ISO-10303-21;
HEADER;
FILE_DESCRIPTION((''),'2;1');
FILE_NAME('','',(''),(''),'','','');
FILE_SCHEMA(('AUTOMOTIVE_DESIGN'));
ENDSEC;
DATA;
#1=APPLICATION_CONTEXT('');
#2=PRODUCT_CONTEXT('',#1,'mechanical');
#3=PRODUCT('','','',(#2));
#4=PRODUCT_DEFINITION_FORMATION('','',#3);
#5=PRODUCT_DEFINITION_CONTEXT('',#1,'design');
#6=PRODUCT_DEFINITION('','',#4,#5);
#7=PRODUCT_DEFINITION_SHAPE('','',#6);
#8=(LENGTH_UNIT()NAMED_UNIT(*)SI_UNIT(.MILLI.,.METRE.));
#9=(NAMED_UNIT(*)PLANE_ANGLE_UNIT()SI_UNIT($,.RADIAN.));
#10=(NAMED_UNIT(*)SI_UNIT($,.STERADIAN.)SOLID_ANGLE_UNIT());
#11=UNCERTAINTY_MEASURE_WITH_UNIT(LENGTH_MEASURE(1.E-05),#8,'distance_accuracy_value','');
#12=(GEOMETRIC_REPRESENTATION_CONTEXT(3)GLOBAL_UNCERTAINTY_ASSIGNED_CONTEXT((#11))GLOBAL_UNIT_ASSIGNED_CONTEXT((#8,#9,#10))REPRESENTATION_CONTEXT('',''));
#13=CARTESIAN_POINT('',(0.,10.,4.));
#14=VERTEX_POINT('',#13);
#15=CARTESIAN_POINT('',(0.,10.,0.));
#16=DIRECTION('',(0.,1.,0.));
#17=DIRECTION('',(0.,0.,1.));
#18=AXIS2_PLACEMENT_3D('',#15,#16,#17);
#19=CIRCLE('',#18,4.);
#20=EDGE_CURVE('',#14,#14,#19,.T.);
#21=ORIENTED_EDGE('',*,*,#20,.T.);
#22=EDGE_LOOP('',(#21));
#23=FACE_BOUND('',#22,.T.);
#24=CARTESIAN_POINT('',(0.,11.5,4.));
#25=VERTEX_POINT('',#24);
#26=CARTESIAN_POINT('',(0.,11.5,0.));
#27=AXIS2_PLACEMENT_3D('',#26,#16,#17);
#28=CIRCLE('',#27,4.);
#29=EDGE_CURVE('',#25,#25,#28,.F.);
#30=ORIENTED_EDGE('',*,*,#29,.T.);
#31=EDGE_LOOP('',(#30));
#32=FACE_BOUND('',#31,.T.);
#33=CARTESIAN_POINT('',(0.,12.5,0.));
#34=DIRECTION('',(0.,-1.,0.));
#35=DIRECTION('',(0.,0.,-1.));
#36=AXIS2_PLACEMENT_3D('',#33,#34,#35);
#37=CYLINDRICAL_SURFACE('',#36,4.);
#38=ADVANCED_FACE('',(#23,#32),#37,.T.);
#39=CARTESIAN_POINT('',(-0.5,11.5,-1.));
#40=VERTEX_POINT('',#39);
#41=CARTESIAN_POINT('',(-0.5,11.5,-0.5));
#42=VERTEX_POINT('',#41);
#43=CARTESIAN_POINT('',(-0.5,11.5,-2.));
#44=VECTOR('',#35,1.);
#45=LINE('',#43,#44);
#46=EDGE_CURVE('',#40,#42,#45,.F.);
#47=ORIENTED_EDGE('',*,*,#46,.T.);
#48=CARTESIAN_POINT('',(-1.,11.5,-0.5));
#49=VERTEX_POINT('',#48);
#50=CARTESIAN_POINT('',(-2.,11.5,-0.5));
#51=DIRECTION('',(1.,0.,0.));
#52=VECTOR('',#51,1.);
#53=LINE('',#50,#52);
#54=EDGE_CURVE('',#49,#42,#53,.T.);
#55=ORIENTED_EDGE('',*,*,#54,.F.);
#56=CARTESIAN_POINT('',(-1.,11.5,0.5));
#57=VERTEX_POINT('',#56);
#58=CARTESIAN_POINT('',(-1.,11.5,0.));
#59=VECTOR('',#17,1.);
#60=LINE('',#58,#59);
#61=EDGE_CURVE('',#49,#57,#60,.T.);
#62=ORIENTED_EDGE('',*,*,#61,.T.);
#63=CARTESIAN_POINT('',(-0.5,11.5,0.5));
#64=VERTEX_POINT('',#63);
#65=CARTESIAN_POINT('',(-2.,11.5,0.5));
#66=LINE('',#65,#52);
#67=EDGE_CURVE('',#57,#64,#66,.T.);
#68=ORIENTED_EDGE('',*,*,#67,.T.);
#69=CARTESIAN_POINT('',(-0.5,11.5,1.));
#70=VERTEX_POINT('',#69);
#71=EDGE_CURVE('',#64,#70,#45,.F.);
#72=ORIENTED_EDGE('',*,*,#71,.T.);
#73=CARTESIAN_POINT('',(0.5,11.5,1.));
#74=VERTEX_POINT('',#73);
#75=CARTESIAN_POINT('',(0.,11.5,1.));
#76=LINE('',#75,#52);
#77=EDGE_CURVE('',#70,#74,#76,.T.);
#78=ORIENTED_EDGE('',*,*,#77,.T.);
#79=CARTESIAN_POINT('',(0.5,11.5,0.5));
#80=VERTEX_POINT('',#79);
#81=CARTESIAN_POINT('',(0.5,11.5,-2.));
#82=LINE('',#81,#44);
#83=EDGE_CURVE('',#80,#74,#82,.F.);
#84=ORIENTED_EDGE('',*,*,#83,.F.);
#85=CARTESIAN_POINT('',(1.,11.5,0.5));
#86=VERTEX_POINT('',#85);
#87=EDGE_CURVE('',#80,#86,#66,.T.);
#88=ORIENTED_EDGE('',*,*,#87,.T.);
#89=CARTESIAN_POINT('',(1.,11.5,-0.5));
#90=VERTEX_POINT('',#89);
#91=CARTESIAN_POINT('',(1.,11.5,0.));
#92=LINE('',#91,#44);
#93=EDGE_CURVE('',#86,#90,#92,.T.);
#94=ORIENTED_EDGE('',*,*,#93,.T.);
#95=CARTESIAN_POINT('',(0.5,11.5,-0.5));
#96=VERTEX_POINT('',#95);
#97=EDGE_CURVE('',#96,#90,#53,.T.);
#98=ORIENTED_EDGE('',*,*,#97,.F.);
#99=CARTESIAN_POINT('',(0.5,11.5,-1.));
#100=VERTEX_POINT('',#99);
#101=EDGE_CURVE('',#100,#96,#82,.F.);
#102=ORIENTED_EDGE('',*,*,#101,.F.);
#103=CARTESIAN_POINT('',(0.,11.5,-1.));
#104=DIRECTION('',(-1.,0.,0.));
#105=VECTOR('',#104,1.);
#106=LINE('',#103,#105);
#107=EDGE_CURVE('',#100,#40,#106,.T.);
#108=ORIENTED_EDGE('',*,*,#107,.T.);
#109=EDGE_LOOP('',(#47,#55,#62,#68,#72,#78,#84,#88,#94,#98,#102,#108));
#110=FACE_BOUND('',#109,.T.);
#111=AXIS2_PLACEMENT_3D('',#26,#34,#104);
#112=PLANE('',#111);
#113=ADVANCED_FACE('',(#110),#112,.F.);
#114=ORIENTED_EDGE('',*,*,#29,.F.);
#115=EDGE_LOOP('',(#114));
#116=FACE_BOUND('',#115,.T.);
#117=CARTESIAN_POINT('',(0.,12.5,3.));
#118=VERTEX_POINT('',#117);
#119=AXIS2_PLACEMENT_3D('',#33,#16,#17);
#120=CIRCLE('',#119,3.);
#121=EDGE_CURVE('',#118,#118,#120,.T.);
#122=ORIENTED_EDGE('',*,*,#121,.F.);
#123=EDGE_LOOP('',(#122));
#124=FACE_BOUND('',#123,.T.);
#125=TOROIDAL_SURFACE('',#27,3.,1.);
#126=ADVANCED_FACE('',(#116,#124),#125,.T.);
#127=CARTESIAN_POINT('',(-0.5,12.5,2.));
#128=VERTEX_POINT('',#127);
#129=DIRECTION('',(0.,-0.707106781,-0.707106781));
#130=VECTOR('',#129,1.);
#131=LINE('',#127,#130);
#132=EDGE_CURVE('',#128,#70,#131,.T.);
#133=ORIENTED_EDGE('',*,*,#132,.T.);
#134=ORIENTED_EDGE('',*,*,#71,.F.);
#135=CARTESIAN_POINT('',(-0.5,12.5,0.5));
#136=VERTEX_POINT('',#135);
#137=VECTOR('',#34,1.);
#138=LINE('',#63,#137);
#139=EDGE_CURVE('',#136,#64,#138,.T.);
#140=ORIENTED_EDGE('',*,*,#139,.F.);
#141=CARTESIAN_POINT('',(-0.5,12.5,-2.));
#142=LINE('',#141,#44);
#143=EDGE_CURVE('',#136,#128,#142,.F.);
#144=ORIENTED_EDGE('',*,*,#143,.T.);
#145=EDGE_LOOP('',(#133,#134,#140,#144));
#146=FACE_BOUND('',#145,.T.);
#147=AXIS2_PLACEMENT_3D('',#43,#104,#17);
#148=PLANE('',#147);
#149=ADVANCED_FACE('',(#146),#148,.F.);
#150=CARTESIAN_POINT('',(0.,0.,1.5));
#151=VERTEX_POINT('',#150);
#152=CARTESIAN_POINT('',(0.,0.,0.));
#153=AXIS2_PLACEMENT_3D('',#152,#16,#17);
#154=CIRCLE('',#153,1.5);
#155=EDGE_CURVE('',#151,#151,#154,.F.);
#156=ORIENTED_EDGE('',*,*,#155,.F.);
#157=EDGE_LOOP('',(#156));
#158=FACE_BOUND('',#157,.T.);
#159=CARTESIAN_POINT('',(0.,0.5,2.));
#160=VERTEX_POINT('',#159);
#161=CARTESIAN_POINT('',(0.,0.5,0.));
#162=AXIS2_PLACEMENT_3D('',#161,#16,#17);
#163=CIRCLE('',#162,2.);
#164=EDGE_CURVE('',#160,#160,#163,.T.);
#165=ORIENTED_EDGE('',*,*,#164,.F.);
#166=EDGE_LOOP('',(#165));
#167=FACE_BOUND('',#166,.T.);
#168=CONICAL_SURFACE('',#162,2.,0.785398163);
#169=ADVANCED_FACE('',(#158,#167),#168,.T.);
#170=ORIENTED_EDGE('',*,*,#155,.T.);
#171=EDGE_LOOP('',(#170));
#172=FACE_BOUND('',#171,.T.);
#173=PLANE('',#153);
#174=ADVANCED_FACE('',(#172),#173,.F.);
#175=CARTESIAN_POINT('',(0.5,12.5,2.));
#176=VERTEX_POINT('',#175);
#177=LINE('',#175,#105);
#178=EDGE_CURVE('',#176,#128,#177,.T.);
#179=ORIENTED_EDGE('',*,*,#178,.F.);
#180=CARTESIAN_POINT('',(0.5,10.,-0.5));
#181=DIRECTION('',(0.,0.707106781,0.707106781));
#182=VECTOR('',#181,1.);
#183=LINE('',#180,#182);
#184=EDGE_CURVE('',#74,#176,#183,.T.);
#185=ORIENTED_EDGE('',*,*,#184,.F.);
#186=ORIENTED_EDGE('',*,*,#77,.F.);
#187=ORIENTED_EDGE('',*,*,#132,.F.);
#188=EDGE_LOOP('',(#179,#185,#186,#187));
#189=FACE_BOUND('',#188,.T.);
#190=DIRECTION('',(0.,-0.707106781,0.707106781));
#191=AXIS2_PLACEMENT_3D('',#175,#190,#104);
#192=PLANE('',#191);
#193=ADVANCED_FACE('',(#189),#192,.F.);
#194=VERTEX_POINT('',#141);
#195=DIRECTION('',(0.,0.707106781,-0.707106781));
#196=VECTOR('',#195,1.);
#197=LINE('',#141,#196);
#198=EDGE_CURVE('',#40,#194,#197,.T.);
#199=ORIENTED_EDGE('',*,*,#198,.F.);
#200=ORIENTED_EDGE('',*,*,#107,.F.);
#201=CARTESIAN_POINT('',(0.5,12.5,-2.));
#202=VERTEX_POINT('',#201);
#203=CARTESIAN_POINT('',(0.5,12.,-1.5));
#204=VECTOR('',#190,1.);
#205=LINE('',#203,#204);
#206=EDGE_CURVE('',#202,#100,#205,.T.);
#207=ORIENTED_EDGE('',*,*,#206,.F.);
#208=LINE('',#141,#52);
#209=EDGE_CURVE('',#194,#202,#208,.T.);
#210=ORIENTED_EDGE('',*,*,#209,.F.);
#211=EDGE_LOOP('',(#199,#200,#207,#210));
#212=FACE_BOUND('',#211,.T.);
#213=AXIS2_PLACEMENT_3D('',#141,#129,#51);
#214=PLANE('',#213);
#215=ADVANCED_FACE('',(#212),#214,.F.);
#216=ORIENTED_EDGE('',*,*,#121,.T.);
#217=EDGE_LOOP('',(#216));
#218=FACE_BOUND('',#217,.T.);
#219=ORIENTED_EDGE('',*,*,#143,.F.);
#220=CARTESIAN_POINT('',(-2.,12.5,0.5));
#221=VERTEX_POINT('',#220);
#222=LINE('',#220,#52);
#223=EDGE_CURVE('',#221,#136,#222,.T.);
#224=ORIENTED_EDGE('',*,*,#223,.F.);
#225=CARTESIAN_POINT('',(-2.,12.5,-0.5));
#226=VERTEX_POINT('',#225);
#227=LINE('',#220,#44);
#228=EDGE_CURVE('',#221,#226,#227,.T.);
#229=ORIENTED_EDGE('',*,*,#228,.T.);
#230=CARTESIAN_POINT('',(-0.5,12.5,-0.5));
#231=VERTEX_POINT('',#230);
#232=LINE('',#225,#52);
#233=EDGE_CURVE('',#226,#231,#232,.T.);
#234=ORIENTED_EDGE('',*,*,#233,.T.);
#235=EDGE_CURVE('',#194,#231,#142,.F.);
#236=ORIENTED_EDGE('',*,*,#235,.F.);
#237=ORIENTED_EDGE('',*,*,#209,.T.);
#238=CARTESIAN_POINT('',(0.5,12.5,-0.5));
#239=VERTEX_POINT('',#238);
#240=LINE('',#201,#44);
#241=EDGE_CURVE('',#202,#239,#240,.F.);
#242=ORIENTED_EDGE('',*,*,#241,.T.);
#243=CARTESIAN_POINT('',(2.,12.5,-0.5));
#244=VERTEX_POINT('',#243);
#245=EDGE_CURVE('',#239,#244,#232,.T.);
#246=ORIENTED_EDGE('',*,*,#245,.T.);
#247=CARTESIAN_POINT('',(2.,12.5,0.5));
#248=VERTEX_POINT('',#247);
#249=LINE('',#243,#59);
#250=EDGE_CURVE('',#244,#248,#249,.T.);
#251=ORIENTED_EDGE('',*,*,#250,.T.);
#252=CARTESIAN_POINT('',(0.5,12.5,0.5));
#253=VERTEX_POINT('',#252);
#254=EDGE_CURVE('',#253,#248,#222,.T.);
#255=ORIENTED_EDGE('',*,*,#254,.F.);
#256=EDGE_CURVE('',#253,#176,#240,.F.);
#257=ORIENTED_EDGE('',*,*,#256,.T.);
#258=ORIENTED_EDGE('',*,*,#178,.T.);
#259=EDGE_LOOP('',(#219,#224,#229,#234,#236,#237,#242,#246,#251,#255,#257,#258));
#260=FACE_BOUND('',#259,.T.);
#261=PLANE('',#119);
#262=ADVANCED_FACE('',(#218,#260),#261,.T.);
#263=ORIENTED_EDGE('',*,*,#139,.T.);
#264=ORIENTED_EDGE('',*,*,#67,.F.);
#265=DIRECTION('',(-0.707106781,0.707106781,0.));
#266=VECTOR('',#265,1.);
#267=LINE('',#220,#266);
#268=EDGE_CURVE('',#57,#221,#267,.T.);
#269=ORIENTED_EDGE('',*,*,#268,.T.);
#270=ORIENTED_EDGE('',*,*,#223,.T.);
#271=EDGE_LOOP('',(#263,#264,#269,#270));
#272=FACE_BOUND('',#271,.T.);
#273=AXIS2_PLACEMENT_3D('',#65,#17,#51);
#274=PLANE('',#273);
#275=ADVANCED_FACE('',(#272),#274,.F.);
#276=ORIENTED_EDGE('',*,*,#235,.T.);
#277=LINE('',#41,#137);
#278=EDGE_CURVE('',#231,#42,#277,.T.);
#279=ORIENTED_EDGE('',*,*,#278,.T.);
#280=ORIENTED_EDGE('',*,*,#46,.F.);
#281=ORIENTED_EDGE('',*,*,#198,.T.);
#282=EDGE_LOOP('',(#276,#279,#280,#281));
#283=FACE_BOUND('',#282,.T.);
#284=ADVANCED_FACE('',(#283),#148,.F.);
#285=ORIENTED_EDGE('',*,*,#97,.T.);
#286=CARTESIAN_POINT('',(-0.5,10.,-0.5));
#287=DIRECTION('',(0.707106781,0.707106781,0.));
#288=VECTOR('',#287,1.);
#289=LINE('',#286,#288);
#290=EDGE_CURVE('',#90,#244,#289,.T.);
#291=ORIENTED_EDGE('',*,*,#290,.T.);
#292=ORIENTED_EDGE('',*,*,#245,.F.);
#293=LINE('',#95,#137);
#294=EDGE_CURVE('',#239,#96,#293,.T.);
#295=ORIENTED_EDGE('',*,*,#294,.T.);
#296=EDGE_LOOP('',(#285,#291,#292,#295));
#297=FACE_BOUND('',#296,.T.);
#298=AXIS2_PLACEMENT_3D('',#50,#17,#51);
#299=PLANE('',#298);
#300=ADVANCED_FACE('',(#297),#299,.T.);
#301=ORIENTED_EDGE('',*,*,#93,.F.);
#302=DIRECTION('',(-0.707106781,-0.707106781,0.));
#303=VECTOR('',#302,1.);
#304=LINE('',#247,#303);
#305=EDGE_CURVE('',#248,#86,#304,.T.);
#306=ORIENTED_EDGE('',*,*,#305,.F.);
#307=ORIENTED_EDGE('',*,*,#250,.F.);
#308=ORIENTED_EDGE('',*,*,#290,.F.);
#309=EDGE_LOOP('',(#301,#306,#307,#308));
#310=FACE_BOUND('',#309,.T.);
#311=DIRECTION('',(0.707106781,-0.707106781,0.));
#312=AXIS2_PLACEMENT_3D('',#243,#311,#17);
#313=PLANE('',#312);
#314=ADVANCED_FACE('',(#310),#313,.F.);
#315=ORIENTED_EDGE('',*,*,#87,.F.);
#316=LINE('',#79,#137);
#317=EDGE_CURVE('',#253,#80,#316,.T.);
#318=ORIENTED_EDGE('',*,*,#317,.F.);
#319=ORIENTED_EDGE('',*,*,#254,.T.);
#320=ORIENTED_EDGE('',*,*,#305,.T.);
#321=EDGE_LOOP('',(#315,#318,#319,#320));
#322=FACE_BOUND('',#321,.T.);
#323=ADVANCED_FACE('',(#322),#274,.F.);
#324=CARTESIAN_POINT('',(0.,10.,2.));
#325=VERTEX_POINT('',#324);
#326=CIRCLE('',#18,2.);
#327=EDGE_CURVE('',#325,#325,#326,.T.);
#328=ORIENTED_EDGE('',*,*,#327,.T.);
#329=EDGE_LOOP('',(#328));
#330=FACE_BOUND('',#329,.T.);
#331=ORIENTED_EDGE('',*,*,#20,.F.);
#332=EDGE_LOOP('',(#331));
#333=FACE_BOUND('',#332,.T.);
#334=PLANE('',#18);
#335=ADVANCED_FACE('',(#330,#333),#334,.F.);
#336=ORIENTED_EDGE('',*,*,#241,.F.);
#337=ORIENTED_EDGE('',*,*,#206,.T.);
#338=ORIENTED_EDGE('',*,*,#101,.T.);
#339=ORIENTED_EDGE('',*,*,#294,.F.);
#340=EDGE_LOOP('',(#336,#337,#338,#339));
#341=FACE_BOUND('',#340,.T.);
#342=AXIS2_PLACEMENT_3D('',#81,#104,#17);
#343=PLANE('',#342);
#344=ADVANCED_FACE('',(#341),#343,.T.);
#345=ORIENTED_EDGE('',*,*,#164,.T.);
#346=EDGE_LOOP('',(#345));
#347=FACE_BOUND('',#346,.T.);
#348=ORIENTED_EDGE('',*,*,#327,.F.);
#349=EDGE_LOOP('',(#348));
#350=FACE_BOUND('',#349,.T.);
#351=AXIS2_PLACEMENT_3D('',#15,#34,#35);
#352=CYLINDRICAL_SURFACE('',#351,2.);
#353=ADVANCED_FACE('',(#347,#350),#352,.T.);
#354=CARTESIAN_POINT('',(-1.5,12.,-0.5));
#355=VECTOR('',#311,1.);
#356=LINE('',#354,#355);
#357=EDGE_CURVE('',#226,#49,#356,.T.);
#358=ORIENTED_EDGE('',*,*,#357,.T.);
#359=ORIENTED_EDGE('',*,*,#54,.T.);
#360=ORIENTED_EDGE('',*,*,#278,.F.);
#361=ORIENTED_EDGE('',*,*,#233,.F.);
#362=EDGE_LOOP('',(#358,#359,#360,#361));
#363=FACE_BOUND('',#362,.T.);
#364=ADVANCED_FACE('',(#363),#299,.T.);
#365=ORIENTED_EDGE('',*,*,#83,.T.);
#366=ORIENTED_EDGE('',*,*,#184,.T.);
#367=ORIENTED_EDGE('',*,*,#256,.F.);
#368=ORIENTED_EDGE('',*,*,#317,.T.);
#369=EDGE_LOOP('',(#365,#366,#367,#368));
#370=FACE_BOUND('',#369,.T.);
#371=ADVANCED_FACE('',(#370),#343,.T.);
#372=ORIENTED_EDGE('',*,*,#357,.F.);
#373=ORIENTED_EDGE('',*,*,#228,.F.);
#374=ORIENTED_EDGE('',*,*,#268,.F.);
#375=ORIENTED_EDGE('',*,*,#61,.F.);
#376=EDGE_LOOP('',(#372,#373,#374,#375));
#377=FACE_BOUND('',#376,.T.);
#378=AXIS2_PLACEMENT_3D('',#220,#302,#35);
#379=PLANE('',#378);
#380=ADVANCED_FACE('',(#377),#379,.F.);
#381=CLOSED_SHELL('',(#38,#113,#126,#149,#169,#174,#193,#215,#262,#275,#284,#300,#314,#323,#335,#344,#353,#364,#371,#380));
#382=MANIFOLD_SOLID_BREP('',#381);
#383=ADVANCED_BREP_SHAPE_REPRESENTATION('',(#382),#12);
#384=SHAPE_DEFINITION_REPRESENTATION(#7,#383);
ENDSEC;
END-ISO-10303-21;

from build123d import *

# Parameters (mm, degrees)
SKETCH_1_R          = 2
EXTRUDE_1_DEPTH     = 10
SKETCH_2_R          = 4
EXTRUDE_2_DEPTH     = 2.5
FILLET_1_R          = 1
CHAMFER_1_SIZE      = 0.5
SKETCH_3_W          = 4
SKETCH_3_H          = 1
SKETCH_3_W_2        = 1
SKETCH_3_H_2        = 4
CUT_EXTRUDE_1_DEPTH = 1
CHAMFER_2_SIZE      = 1


with BuildPart() as part:
    # 草图1 → 凸台-拉伸1 (new body)
    with BuildSketch(Plane(origin=(0, 0, 0), x_dir=(1, 0, 0), z_dir=(0, 1, 0))):
        with Locations(Location((0, 0, 0), (0, 0, 270))):
            Circle(SKETCH_1_R)
    extrude(amount=EXTRUDE_1_DEPTH)

    # 草图2 → 凸台-拉伸2 (add)
    with BuildSketch(Plane(origin=(0, 10, 0), x_dir=(1, 0, 0), z_dir=(0, 1, 0))):
        with Locations(Location((0, 0, 0), (0, 0, 270))):
            Circle(SKETCH_2_R)
    extrude(amount=EXTRUDE_2_DEPTH)

    # 圆角1
    fillet_1_edges = [part.edges().sort_by_distance(p)[0] for p in [
        (0, 12.5, -4),
    ]]
    fillet(fillet_1_edges, radius=FILLET_1_R)

    # 倒角1
    chamfer_1_edges = [part.edges().sort_by_distance(p)[0] for p in [
        (0, 0, -2),
    ]]
    chamfer(chamfer_1_edges, length=CHAMFER_1_SIZE)

    # 草图3 → 切除-拉伸-薄壁1 (cut)
    with BuildSketch(Plane(origin=(0, 12.5, 0), x_dir=(1, 0, 0), z_dir=(0, 1, 0))):
        Rectangle(SKETCH_3_W, SKETCH_3_H)
        Rectangle(SKETCH_3_W_2, SKETCH_3_H_2)
    extrude(amount=-CUT_EXTRUDE_1_DEPTH, mode=Mode.SUBTRACT)

    # 倒角2
    chamfer_2_edges = [part.edges().sort_by_distance(p)[0] for p in [
        (0, 11.5, 2),
        (2, 11.5, 0),
        (0, 11.5, -2),
        (-2, 11.5, 0),
    ]]
    chamfer(chamfer_2_edges, length=CHAMFER_2_SIZE - 0.0001)  # a hair under: the kernel refuses the full size


solid = part.part
